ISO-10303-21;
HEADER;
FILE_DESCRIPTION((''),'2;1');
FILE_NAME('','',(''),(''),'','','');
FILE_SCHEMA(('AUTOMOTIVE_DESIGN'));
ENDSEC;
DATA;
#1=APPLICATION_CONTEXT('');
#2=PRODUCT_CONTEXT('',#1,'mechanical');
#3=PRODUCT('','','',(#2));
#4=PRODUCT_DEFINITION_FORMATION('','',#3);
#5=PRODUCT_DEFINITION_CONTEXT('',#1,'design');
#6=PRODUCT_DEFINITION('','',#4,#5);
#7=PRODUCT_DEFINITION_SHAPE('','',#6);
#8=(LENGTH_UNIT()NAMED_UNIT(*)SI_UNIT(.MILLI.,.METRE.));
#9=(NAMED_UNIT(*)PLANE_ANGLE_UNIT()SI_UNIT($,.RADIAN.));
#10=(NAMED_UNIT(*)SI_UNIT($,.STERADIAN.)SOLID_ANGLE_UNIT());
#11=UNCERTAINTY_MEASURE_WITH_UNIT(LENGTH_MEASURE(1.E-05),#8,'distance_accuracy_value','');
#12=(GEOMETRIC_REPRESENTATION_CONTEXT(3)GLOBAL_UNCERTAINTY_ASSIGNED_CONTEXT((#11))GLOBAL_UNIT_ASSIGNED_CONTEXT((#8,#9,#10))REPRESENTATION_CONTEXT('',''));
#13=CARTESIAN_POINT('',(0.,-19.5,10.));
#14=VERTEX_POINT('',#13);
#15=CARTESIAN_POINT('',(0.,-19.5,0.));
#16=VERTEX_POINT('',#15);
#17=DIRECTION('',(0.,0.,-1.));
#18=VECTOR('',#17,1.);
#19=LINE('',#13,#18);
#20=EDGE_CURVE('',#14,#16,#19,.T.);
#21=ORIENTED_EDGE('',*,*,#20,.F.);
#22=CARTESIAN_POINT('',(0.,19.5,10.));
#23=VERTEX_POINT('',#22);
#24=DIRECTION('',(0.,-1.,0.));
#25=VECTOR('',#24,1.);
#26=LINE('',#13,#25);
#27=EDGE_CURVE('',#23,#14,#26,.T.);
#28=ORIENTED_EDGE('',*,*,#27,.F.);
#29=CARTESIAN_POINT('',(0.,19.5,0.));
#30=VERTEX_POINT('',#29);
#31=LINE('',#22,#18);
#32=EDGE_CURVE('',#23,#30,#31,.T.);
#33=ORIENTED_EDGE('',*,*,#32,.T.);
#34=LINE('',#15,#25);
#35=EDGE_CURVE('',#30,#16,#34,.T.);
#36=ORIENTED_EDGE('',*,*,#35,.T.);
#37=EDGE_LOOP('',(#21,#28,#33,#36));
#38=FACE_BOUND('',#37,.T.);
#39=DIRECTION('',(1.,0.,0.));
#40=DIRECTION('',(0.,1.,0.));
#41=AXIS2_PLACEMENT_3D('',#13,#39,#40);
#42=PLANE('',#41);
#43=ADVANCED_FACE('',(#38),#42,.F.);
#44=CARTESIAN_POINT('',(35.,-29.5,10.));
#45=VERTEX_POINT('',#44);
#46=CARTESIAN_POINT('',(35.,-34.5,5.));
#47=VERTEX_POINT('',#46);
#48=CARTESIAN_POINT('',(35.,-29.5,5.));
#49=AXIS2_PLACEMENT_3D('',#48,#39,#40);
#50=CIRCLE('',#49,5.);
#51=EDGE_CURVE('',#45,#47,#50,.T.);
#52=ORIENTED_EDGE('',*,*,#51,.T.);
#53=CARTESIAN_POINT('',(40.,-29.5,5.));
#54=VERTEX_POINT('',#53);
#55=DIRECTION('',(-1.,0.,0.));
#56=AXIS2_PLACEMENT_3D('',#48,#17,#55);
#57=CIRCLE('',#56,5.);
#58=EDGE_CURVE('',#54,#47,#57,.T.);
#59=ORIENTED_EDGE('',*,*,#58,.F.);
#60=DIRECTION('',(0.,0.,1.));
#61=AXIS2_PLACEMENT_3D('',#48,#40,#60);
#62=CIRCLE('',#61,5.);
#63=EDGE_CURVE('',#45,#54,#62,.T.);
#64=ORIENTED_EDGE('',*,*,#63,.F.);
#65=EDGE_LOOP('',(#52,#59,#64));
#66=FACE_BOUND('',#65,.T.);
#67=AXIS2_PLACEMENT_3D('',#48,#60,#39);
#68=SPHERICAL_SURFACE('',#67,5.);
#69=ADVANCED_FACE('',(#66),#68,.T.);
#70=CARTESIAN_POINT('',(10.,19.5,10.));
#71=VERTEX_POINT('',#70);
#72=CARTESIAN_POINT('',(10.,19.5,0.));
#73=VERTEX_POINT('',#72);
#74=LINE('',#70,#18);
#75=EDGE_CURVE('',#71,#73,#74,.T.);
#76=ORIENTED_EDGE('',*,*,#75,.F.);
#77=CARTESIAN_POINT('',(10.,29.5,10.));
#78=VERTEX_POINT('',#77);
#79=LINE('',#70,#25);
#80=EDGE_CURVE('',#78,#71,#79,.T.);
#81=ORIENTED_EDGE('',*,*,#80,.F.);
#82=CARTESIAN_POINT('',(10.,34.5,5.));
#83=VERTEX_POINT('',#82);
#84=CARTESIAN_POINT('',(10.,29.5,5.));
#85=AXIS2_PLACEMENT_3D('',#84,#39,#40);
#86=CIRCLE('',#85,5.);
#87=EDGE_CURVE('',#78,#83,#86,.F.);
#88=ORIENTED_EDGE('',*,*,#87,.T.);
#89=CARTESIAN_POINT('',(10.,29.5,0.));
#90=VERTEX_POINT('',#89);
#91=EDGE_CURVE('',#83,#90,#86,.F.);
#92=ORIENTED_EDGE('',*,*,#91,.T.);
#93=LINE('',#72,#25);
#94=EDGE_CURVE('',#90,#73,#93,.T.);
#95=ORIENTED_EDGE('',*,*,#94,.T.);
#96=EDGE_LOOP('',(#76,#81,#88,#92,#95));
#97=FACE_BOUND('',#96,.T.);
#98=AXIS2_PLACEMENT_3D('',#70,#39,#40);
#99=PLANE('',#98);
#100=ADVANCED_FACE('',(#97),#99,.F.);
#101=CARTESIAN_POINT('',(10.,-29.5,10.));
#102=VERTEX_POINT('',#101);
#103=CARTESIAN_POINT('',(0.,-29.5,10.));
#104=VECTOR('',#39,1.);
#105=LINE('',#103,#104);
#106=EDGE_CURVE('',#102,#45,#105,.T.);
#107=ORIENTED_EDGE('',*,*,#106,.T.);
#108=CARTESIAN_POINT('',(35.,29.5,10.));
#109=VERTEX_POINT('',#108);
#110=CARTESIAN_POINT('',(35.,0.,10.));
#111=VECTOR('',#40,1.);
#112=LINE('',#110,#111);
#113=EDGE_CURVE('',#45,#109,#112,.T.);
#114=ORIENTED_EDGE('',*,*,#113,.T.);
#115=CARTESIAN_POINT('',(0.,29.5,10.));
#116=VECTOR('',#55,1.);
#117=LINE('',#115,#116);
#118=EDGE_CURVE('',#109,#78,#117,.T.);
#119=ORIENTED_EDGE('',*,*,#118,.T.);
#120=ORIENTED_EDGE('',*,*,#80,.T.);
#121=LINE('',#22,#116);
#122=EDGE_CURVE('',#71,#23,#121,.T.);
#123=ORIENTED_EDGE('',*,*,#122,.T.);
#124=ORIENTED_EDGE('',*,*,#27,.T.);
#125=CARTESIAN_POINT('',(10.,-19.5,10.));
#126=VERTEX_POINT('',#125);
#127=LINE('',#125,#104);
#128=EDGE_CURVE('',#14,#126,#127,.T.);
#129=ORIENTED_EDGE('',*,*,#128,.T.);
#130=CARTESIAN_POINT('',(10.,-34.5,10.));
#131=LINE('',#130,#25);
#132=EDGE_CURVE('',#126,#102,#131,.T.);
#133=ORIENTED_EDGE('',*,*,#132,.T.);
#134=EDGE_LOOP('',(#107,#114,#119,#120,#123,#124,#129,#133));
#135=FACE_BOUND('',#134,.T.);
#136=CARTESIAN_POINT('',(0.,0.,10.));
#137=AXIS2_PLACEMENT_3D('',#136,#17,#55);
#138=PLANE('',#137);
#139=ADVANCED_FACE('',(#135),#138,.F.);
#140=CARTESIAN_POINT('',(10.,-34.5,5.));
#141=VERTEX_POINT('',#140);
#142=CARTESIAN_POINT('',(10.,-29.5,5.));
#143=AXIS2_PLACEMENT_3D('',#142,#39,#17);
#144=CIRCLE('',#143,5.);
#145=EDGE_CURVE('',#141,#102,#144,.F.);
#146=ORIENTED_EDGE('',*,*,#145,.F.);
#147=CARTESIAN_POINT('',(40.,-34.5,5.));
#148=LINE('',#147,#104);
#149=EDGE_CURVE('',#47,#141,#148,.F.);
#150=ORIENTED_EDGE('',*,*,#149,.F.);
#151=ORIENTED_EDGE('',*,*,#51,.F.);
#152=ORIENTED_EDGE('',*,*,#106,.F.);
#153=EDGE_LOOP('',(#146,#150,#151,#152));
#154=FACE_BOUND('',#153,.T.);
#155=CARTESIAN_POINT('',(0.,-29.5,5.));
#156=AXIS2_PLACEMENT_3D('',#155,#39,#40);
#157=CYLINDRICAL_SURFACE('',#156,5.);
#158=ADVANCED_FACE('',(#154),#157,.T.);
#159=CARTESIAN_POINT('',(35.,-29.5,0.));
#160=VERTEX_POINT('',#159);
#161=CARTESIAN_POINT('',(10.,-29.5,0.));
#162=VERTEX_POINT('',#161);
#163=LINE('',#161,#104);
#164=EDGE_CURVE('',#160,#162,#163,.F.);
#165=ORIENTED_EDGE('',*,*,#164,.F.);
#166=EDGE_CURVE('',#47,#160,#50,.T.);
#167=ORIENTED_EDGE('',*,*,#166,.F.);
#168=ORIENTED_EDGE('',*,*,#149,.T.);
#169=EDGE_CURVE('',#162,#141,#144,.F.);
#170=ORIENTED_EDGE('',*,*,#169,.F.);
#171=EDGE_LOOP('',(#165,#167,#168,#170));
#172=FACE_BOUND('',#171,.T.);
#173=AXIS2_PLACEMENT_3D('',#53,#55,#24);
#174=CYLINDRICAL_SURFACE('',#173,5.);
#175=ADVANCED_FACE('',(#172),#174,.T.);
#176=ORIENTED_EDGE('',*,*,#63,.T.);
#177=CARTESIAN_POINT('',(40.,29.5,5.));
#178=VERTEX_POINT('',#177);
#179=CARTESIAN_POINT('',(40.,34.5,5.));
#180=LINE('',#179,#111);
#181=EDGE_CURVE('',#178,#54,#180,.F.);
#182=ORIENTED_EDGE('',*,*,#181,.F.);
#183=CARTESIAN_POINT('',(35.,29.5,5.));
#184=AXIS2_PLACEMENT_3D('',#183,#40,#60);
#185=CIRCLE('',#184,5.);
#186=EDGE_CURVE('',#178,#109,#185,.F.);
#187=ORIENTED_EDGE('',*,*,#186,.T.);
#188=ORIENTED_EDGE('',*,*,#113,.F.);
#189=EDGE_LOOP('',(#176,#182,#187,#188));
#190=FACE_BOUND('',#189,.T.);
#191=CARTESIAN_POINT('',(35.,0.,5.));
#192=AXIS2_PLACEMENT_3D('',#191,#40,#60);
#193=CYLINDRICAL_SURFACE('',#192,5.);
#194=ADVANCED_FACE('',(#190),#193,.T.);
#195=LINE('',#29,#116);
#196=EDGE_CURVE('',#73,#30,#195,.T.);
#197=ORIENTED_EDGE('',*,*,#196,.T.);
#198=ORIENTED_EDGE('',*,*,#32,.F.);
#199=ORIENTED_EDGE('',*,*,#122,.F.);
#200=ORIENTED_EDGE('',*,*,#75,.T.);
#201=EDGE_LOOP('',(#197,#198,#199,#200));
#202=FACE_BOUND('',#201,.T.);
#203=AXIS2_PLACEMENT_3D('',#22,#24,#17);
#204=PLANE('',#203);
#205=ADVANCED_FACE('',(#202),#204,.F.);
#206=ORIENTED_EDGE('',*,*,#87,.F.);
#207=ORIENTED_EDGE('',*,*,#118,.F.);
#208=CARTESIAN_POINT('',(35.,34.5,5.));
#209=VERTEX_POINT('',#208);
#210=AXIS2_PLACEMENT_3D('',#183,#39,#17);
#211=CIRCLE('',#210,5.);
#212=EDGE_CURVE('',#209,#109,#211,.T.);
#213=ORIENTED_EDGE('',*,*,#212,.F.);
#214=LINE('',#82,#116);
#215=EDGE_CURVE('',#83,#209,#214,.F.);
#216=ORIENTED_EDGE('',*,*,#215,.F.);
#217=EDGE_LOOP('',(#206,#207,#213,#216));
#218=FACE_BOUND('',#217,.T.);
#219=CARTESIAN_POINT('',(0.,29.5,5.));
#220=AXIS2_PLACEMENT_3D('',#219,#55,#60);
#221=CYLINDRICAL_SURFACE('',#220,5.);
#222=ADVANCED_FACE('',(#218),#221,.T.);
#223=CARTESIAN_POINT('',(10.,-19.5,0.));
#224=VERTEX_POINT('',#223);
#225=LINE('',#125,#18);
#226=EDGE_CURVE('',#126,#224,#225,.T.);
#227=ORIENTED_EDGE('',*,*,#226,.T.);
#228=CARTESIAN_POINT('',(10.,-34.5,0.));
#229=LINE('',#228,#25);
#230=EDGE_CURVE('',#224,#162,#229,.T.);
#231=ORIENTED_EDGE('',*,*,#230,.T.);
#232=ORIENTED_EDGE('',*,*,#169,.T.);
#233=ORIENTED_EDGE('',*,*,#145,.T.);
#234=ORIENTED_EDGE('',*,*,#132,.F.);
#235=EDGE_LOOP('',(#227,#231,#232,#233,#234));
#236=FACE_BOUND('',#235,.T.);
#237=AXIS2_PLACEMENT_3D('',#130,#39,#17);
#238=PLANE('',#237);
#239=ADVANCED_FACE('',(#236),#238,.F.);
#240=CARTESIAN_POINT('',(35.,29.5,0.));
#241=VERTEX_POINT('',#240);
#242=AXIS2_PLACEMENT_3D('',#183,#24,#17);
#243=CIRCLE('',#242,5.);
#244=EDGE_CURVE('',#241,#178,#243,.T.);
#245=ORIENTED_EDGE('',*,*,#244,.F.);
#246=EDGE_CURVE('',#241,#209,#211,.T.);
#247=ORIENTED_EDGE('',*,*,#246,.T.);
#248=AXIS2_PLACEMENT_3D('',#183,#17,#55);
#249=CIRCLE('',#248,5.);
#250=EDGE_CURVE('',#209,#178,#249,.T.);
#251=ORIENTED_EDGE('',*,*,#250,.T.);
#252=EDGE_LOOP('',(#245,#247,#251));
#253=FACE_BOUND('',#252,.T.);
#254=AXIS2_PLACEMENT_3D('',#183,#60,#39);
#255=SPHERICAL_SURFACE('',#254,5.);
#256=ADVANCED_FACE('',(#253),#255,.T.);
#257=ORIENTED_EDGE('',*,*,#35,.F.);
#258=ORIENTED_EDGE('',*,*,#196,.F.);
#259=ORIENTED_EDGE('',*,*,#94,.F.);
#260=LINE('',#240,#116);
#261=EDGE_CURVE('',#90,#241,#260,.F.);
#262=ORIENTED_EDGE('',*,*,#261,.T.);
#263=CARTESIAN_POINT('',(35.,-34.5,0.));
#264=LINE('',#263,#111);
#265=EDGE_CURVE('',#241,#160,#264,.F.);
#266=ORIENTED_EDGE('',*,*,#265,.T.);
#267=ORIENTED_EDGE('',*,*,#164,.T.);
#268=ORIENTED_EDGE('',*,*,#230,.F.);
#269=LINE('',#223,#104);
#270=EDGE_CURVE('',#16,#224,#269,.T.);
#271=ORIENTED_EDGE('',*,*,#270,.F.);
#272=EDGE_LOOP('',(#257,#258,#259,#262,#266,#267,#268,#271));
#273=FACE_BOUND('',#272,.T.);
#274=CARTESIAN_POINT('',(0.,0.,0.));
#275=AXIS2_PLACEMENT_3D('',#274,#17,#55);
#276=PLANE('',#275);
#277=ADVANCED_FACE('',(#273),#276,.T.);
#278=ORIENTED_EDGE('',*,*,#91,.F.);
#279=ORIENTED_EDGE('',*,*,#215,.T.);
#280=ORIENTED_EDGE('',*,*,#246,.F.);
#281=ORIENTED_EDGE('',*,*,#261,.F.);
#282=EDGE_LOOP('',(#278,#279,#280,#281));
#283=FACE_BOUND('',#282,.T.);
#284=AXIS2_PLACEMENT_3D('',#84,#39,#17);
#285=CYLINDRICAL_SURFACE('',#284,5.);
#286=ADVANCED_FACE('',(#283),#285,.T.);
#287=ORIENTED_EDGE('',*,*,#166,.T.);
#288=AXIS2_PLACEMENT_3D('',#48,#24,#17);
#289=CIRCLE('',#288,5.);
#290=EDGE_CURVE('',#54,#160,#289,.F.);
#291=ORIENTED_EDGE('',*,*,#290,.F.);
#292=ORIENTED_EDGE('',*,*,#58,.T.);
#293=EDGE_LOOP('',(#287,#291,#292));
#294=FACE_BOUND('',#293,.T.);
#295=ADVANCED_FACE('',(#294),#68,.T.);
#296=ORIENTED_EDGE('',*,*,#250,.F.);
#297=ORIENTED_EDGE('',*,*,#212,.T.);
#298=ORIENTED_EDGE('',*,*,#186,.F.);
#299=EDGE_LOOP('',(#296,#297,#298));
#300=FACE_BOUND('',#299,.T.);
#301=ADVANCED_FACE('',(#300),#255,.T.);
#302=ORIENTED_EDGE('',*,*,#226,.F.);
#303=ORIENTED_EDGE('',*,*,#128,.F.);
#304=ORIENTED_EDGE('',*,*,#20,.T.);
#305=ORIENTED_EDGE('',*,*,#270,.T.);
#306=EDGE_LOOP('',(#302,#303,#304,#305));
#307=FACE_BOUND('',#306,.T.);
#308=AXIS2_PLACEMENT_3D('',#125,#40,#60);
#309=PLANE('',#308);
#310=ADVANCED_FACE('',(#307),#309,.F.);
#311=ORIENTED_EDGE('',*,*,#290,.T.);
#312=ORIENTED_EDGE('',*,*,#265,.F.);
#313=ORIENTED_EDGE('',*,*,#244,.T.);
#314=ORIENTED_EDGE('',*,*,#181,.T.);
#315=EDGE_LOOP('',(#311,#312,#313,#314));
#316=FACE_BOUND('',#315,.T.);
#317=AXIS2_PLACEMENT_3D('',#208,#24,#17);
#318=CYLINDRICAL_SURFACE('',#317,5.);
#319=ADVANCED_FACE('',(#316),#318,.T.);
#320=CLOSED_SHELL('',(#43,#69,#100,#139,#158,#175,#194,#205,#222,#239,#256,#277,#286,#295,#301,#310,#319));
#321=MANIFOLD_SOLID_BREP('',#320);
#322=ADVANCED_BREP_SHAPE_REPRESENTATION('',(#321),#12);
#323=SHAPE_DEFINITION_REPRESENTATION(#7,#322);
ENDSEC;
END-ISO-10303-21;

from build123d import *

# Parameters (mm, degrees)
BOSS_EXTRUDE1_DEPTH = 10
FILLET1_R           = 5
FILLET2_R           = 5


# Some blends are built 0.0001 mm under size
with BuildPart() as part:
    # Sketch1 → Boss-Extrude1 (new body)
    with BuildSketch(Plane.XY):
        Polygon((0, -19.5), (0, 19.5), (10, 19.5), (10, 34.5), (40, 34.5), (40, -34.5), (10, -34.5), (10, -19.5), align=None)
    extrude(amount=BOSS_EXTRUDE1_DEPTH)

    # Fillet1
    fillet1_edges = [part.edges().sort_by_distance(p)[0] for p in [
        (40, 0, 10),
        (40, 34.5, 5),
        (40, -34.5, 5),
        (40, 0, 0),
    ]]
    fillet(fillet1_edges, radius=FILLET1_R - 0.0001)  # a hair under: the kernel refuses the full size

    # Fillet2
    # the kernel refuses this fillet: 5 mm, written as the material it takes off along each edge
    with BuildSketch(Plane(origin=(40, 29.5, 5), x_dir=(0, 0, -1), z_dir=(0, -1, 0))) as fillet2_piece_1:
        with BuildLine():
            CenterArc((0.0001, -4.9999), 4.9999, 0, 90)
            Line((5, -4.9999), (5, 0))
            Line((5, 0), (0.0001, 0))
        make_face()
    revolve(axis=Axis((40, 29.5, 5), (1, 0, 0)), revolution_arc=90, mode=Mode.SUBTRACT)
    with BuildSketch(Plane(origin=(40, 29.5, 5), x_dir=(0, 1, 0), z_dir=(0, 0, -1))) as fillet2_piece_2:
        with BuildLine():
            CenterArc((0.0001, -4.9999), 4.9999, 0, 90)
            Line((5, -4.9999), (5, 0))
            Line((5, 0), (0.0001, 0))
        make_face()
    revolve(axis=Axis((40, 29.5, 5), (1, 0, 0)), revolution_arc=90, mode=Mode.SUBTRACT)
    with BuildSketch(Plane(origin=(40, -29.5, 5), x_dir=(0, -1, 0), z_dir=(0, 0, 1))) as fillet2_piece_3:
        with BuildLine():
            CenterArc((0.0001, -4.9999), 4.9999, 0, 90)
            Line((5, -4.9999), (5, 0))
            Line((5, 0), (0.0001, 0))
        make_face()
    revolve(axis=Axis((40, -29.5, 5), (1, 0, 0)), revolution_arc=90, mode=Mode.SUBTRACT)
    with BuildSketch(Plane(origin=(40, -29.5, 5), x_dir=(0, 0, 1), z_dir=(0, 1, 0))) as fillet2_piece_4:
        with BuildLine():
            CenterArc((0.0001, -4.9999), 4.9999, 0, 90)
            Line((5, -4.9999), (5, 0))
            Line((5, 0), (0.0001, 0))
        make_face()
    revolve(axis=Axis((40, -29.5, 5), (1, 0, 0)), revolution_arc=90, mode=Mode.SUBTRACT)
    with BuildSketch(Plane(origin=(-2.5, 34.5, 0), x_dir=(0, 0, 1), z_dir=(1, 0, 0)), Plane(origin=(40, -34.5, 10), x_dir=(0, 1, 0), z_dir=(-1, 0, 0))) as fillet2_piece_5:
        with BuildLine():
            CenterArc((FILLET2_R, FILLET2_R), FILLET2_R, 180, 90)
            Line((0, FILLET2_R), (0, 0))
            Line((0, 0), (FILLET2_R, 0))
        make_face()
    extrude(amount=42.5, mode=Mode.SUBTRACT)
    with BuildSketch(Plane(origin=(-2.5, 34.5, 10), x_dir=(0, 0, -1), z_dir=(1, 0, 0)), Plane(origin=(40, -34.5, 0), x_dir=(0, 1, 0), z_dir=(-1, 0, 0))) as fillet2_piece_6:
        with BuildLine():
            CenterArc((FILLET2_R, -FILLET2_R), FILLET2_R, 90, 90)
            Line((0, -FILLET2_R), (0, 0))
            Line((0, 0), (FILLET2_R, 0))
        make_face()
    extrude(amount=42.5, mode=Mode.SUBTRACT)


solid = part.part
